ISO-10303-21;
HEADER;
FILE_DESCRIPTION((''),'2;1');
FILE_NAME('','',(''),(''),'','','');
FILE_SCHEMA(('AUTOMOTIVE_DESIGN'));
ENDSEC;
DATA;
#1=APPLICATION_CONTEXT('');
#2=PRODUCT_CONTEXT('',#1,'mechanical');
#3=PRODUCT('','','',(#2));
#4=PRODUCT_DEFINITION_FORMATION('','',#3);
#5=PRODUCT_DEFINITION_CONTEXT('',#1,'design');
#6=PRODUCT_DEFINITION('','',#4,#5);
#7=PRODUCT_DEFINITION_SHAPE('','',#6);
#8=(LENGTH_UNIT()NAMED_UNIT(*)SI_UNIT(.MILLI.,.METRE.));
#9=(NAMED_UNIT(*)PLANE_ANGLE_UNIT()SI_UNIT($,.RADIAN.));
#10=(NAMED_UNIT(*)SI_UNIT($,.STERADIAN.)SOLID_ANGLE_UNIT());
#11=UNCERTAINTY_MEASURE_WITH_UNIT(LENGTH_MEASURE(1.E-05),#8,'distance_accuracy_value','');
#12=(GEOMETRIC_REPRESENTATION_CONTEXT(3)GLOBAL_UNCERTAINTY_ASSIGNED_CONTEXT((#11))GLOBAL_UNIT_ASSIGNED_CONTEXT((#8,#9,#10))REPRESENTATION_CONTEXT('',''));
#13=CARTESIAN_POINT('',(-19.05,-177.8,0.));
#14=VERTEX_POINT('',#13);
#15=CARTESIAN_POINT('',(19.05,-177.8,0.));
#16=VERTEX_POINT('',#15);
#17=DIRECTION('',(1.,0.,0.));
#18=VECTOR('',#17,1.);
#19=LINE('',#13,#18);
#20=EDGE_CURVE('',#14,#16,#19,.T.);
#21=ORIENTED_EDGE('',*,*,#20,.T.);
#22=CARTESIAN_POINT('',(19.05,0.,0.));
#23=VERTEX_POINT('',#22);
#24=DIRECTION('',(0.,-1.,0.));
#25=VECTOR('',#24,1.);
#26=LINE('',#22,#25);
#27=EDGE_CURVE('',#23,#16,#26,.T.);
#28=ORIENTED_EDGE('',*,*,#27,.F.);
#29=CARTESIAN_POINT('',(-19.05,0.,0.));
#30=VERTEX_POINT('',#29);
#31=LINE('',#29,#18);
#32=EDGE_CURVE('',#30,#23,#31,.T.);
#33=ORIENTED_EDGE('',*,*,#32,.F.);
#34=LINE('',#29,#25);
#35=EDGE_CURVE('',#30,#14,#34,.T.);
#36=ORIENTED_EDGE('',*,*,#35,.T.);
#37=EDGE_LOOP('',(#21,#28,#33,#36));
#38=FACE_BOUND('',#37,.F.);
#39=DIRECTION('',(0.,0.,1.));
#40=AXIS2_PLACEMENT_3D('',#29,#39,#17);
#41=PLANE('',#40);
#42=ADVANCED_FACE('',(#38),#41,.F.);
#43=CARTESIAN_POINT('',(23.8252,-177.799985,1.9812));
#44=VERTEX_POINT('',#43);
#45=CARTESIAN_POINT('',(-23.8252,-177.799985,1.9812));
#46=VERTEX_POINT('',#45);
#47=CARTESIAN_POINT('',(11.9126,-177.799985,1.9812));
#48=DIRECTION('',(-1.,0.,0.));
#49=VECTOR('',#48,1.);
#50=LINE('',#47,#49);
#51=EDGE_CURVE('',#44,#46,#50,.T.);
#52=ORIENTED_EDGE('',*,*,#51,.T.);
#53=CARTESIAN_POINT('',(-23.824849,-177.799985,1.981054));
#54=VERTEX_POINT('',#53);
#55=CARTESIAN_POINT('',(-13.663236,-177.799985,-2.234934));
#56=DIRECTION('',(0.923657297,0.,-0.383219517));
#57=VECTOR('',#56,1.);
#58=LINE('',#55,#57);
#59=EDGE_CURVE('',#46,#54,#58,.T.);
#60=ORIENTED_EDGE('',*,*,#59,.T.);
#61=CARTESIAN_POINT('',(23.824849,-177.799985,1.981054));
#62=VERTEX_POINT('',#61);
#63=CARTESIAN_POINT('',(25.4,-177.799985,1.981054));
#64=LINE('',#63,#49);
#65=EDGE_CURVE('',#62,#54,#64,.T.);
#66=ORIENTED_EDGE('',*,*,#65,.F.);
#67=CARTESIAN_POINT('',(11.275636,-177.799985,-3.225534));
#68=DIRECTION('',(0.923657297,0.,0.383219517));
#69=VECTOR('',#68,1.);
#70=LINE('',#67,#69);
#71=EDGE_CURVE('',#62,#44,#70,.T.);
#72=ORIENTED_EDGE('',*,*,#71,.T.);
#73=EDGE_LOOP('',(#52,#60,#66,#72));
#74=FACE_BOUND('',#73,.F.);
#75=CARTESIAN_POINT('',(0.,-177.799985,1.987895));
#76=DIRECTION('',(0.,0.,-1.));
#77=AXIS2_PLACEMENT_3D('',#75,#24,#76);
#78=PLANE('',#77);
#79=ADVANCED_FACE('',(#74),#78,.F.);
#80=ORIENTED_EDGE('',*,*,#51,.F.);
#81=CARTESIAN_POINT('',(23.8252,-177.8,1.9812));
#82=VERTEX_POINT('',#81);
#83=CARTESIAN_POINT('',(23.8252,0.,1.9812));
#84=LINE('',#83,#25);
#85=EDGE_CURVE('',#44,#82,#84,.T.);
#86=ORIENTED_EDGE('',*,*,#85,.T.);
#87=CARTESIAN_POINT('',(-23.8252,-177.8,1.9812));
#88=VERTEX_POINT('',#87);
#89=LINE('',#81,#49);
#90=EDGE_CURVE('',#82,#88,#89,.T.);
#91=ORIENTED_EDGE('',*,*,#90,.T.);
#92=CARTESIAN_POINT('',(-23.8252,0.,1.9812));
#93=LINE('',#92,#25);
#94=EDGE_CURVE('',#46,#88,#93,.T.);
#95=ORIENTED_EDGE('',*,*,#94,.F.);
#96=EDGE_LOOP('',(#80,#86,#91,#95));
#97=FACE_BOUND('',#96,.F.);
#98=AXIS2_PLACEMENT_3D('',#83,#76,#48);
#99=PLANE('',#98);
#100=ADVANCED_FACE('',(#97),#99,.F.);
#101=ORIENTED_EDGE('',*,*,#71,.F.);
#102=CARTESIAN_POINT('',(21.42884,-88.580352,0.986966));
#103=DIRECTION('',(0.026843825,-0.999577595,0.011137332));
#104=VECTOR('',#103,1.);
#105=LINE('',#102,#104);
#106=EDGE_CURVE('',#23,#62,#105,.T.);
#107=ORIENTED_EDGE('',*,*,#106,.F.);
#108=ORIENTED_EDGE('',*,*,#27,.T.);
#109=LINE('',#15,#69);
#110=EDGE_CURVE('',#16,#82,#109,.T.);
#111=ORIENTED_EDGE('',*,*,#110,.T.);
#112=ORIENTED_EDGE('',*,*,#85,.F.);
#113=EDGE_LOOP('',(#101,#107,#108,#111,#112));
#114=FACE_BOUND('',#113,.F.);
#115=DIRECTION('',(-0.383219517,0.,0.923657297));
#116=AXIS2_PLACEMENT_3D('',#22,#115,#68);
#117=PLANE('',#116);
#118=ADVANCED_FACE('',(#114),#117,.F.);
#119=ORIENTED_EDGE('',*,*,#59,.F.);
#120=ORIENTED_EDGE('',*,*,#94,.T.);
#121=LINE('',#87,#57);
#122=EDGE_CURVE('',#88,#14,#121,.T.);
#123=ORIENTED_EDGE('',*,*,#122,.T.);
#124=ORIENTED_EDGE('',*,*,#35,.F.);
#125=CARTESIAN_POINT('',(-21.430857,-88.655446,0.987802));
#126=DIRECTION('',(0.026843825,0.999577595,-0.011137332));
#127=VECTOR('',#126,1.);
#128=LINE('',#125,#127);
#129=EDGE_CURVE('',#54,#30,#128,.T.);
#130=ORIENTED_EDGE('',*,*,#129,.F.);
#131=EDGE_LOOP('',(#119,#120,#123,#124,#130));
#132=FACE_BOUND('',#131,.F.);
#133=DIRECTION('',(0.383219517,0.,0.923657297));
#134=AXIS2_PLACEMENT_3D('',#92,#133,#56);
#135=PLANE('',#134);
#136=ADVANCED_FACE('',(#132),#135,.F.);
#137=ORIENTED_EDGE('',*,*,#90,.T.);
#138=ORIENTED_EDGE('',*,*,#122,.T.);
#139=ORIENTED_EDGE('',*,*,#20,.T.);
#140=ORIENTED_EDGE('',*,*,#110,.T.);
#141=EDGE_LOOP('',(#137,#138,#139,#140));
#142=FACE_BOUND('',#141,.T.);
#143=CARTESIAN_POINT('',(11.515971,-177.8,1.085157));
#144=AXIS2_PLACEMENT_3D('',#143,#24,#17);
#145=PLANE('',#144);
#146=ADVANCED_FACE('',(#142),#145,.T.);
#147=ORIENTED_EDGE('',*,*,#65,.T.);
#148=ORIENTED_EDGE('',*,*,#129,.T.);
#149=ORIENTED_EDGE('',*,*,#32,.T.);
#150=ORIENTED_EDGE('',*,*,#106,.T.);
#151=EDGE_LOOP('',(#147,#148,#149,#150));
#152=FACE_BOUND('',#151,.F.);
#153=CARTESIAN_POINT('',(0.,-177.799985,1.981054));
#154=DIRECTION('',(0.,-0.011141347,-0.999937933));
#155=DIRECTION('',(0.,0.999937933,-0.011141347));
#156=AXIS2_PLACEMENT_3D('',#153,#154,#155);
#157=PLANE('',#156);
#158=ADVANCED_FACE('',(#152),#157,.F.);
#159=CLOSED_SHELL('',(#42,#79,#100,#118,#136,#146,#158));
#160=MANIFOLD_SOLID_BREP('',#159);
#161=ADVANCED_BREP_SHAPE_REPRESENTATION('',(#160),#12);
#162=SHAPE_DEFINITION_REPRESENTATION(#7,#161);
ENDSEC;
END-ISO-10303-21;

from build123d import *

# Parameters (mm, degrees)
F1_DEPTH = 177.8
F3_DEPTH = 25.4


# Not quite as in the source:
# - a feature names something its author has since deleted; it is built from what else it names


with BuildPart() as f1:
    # F0 (on Front) → F1 (new body)
    with BuildSketch(Plane.XZ):
        Polygon((0, 1.9812), (0, 0), (19.05, 0), (23.8252, 1.9812), align=None)
        Polygon((-19.05, 0), (0, 0), (0, 1.9812), (-23.8252, 1.9812), align=None)
    extrude(amount=F1_DEPTH)

    # F2 (on Right) → F3 (cut, symmetric)
    with BuildSketch(Plane.YZ):
        Polygon((-177.7999848127, 1.9810541999), (0, 0), (0, 5.3311795928), (-177.7999848127, 1.9878952298), align=None)
    extrude(amount=F3_DEPTH, both=True, mode=Mode.SUBTRACT)


solid = f1.part
